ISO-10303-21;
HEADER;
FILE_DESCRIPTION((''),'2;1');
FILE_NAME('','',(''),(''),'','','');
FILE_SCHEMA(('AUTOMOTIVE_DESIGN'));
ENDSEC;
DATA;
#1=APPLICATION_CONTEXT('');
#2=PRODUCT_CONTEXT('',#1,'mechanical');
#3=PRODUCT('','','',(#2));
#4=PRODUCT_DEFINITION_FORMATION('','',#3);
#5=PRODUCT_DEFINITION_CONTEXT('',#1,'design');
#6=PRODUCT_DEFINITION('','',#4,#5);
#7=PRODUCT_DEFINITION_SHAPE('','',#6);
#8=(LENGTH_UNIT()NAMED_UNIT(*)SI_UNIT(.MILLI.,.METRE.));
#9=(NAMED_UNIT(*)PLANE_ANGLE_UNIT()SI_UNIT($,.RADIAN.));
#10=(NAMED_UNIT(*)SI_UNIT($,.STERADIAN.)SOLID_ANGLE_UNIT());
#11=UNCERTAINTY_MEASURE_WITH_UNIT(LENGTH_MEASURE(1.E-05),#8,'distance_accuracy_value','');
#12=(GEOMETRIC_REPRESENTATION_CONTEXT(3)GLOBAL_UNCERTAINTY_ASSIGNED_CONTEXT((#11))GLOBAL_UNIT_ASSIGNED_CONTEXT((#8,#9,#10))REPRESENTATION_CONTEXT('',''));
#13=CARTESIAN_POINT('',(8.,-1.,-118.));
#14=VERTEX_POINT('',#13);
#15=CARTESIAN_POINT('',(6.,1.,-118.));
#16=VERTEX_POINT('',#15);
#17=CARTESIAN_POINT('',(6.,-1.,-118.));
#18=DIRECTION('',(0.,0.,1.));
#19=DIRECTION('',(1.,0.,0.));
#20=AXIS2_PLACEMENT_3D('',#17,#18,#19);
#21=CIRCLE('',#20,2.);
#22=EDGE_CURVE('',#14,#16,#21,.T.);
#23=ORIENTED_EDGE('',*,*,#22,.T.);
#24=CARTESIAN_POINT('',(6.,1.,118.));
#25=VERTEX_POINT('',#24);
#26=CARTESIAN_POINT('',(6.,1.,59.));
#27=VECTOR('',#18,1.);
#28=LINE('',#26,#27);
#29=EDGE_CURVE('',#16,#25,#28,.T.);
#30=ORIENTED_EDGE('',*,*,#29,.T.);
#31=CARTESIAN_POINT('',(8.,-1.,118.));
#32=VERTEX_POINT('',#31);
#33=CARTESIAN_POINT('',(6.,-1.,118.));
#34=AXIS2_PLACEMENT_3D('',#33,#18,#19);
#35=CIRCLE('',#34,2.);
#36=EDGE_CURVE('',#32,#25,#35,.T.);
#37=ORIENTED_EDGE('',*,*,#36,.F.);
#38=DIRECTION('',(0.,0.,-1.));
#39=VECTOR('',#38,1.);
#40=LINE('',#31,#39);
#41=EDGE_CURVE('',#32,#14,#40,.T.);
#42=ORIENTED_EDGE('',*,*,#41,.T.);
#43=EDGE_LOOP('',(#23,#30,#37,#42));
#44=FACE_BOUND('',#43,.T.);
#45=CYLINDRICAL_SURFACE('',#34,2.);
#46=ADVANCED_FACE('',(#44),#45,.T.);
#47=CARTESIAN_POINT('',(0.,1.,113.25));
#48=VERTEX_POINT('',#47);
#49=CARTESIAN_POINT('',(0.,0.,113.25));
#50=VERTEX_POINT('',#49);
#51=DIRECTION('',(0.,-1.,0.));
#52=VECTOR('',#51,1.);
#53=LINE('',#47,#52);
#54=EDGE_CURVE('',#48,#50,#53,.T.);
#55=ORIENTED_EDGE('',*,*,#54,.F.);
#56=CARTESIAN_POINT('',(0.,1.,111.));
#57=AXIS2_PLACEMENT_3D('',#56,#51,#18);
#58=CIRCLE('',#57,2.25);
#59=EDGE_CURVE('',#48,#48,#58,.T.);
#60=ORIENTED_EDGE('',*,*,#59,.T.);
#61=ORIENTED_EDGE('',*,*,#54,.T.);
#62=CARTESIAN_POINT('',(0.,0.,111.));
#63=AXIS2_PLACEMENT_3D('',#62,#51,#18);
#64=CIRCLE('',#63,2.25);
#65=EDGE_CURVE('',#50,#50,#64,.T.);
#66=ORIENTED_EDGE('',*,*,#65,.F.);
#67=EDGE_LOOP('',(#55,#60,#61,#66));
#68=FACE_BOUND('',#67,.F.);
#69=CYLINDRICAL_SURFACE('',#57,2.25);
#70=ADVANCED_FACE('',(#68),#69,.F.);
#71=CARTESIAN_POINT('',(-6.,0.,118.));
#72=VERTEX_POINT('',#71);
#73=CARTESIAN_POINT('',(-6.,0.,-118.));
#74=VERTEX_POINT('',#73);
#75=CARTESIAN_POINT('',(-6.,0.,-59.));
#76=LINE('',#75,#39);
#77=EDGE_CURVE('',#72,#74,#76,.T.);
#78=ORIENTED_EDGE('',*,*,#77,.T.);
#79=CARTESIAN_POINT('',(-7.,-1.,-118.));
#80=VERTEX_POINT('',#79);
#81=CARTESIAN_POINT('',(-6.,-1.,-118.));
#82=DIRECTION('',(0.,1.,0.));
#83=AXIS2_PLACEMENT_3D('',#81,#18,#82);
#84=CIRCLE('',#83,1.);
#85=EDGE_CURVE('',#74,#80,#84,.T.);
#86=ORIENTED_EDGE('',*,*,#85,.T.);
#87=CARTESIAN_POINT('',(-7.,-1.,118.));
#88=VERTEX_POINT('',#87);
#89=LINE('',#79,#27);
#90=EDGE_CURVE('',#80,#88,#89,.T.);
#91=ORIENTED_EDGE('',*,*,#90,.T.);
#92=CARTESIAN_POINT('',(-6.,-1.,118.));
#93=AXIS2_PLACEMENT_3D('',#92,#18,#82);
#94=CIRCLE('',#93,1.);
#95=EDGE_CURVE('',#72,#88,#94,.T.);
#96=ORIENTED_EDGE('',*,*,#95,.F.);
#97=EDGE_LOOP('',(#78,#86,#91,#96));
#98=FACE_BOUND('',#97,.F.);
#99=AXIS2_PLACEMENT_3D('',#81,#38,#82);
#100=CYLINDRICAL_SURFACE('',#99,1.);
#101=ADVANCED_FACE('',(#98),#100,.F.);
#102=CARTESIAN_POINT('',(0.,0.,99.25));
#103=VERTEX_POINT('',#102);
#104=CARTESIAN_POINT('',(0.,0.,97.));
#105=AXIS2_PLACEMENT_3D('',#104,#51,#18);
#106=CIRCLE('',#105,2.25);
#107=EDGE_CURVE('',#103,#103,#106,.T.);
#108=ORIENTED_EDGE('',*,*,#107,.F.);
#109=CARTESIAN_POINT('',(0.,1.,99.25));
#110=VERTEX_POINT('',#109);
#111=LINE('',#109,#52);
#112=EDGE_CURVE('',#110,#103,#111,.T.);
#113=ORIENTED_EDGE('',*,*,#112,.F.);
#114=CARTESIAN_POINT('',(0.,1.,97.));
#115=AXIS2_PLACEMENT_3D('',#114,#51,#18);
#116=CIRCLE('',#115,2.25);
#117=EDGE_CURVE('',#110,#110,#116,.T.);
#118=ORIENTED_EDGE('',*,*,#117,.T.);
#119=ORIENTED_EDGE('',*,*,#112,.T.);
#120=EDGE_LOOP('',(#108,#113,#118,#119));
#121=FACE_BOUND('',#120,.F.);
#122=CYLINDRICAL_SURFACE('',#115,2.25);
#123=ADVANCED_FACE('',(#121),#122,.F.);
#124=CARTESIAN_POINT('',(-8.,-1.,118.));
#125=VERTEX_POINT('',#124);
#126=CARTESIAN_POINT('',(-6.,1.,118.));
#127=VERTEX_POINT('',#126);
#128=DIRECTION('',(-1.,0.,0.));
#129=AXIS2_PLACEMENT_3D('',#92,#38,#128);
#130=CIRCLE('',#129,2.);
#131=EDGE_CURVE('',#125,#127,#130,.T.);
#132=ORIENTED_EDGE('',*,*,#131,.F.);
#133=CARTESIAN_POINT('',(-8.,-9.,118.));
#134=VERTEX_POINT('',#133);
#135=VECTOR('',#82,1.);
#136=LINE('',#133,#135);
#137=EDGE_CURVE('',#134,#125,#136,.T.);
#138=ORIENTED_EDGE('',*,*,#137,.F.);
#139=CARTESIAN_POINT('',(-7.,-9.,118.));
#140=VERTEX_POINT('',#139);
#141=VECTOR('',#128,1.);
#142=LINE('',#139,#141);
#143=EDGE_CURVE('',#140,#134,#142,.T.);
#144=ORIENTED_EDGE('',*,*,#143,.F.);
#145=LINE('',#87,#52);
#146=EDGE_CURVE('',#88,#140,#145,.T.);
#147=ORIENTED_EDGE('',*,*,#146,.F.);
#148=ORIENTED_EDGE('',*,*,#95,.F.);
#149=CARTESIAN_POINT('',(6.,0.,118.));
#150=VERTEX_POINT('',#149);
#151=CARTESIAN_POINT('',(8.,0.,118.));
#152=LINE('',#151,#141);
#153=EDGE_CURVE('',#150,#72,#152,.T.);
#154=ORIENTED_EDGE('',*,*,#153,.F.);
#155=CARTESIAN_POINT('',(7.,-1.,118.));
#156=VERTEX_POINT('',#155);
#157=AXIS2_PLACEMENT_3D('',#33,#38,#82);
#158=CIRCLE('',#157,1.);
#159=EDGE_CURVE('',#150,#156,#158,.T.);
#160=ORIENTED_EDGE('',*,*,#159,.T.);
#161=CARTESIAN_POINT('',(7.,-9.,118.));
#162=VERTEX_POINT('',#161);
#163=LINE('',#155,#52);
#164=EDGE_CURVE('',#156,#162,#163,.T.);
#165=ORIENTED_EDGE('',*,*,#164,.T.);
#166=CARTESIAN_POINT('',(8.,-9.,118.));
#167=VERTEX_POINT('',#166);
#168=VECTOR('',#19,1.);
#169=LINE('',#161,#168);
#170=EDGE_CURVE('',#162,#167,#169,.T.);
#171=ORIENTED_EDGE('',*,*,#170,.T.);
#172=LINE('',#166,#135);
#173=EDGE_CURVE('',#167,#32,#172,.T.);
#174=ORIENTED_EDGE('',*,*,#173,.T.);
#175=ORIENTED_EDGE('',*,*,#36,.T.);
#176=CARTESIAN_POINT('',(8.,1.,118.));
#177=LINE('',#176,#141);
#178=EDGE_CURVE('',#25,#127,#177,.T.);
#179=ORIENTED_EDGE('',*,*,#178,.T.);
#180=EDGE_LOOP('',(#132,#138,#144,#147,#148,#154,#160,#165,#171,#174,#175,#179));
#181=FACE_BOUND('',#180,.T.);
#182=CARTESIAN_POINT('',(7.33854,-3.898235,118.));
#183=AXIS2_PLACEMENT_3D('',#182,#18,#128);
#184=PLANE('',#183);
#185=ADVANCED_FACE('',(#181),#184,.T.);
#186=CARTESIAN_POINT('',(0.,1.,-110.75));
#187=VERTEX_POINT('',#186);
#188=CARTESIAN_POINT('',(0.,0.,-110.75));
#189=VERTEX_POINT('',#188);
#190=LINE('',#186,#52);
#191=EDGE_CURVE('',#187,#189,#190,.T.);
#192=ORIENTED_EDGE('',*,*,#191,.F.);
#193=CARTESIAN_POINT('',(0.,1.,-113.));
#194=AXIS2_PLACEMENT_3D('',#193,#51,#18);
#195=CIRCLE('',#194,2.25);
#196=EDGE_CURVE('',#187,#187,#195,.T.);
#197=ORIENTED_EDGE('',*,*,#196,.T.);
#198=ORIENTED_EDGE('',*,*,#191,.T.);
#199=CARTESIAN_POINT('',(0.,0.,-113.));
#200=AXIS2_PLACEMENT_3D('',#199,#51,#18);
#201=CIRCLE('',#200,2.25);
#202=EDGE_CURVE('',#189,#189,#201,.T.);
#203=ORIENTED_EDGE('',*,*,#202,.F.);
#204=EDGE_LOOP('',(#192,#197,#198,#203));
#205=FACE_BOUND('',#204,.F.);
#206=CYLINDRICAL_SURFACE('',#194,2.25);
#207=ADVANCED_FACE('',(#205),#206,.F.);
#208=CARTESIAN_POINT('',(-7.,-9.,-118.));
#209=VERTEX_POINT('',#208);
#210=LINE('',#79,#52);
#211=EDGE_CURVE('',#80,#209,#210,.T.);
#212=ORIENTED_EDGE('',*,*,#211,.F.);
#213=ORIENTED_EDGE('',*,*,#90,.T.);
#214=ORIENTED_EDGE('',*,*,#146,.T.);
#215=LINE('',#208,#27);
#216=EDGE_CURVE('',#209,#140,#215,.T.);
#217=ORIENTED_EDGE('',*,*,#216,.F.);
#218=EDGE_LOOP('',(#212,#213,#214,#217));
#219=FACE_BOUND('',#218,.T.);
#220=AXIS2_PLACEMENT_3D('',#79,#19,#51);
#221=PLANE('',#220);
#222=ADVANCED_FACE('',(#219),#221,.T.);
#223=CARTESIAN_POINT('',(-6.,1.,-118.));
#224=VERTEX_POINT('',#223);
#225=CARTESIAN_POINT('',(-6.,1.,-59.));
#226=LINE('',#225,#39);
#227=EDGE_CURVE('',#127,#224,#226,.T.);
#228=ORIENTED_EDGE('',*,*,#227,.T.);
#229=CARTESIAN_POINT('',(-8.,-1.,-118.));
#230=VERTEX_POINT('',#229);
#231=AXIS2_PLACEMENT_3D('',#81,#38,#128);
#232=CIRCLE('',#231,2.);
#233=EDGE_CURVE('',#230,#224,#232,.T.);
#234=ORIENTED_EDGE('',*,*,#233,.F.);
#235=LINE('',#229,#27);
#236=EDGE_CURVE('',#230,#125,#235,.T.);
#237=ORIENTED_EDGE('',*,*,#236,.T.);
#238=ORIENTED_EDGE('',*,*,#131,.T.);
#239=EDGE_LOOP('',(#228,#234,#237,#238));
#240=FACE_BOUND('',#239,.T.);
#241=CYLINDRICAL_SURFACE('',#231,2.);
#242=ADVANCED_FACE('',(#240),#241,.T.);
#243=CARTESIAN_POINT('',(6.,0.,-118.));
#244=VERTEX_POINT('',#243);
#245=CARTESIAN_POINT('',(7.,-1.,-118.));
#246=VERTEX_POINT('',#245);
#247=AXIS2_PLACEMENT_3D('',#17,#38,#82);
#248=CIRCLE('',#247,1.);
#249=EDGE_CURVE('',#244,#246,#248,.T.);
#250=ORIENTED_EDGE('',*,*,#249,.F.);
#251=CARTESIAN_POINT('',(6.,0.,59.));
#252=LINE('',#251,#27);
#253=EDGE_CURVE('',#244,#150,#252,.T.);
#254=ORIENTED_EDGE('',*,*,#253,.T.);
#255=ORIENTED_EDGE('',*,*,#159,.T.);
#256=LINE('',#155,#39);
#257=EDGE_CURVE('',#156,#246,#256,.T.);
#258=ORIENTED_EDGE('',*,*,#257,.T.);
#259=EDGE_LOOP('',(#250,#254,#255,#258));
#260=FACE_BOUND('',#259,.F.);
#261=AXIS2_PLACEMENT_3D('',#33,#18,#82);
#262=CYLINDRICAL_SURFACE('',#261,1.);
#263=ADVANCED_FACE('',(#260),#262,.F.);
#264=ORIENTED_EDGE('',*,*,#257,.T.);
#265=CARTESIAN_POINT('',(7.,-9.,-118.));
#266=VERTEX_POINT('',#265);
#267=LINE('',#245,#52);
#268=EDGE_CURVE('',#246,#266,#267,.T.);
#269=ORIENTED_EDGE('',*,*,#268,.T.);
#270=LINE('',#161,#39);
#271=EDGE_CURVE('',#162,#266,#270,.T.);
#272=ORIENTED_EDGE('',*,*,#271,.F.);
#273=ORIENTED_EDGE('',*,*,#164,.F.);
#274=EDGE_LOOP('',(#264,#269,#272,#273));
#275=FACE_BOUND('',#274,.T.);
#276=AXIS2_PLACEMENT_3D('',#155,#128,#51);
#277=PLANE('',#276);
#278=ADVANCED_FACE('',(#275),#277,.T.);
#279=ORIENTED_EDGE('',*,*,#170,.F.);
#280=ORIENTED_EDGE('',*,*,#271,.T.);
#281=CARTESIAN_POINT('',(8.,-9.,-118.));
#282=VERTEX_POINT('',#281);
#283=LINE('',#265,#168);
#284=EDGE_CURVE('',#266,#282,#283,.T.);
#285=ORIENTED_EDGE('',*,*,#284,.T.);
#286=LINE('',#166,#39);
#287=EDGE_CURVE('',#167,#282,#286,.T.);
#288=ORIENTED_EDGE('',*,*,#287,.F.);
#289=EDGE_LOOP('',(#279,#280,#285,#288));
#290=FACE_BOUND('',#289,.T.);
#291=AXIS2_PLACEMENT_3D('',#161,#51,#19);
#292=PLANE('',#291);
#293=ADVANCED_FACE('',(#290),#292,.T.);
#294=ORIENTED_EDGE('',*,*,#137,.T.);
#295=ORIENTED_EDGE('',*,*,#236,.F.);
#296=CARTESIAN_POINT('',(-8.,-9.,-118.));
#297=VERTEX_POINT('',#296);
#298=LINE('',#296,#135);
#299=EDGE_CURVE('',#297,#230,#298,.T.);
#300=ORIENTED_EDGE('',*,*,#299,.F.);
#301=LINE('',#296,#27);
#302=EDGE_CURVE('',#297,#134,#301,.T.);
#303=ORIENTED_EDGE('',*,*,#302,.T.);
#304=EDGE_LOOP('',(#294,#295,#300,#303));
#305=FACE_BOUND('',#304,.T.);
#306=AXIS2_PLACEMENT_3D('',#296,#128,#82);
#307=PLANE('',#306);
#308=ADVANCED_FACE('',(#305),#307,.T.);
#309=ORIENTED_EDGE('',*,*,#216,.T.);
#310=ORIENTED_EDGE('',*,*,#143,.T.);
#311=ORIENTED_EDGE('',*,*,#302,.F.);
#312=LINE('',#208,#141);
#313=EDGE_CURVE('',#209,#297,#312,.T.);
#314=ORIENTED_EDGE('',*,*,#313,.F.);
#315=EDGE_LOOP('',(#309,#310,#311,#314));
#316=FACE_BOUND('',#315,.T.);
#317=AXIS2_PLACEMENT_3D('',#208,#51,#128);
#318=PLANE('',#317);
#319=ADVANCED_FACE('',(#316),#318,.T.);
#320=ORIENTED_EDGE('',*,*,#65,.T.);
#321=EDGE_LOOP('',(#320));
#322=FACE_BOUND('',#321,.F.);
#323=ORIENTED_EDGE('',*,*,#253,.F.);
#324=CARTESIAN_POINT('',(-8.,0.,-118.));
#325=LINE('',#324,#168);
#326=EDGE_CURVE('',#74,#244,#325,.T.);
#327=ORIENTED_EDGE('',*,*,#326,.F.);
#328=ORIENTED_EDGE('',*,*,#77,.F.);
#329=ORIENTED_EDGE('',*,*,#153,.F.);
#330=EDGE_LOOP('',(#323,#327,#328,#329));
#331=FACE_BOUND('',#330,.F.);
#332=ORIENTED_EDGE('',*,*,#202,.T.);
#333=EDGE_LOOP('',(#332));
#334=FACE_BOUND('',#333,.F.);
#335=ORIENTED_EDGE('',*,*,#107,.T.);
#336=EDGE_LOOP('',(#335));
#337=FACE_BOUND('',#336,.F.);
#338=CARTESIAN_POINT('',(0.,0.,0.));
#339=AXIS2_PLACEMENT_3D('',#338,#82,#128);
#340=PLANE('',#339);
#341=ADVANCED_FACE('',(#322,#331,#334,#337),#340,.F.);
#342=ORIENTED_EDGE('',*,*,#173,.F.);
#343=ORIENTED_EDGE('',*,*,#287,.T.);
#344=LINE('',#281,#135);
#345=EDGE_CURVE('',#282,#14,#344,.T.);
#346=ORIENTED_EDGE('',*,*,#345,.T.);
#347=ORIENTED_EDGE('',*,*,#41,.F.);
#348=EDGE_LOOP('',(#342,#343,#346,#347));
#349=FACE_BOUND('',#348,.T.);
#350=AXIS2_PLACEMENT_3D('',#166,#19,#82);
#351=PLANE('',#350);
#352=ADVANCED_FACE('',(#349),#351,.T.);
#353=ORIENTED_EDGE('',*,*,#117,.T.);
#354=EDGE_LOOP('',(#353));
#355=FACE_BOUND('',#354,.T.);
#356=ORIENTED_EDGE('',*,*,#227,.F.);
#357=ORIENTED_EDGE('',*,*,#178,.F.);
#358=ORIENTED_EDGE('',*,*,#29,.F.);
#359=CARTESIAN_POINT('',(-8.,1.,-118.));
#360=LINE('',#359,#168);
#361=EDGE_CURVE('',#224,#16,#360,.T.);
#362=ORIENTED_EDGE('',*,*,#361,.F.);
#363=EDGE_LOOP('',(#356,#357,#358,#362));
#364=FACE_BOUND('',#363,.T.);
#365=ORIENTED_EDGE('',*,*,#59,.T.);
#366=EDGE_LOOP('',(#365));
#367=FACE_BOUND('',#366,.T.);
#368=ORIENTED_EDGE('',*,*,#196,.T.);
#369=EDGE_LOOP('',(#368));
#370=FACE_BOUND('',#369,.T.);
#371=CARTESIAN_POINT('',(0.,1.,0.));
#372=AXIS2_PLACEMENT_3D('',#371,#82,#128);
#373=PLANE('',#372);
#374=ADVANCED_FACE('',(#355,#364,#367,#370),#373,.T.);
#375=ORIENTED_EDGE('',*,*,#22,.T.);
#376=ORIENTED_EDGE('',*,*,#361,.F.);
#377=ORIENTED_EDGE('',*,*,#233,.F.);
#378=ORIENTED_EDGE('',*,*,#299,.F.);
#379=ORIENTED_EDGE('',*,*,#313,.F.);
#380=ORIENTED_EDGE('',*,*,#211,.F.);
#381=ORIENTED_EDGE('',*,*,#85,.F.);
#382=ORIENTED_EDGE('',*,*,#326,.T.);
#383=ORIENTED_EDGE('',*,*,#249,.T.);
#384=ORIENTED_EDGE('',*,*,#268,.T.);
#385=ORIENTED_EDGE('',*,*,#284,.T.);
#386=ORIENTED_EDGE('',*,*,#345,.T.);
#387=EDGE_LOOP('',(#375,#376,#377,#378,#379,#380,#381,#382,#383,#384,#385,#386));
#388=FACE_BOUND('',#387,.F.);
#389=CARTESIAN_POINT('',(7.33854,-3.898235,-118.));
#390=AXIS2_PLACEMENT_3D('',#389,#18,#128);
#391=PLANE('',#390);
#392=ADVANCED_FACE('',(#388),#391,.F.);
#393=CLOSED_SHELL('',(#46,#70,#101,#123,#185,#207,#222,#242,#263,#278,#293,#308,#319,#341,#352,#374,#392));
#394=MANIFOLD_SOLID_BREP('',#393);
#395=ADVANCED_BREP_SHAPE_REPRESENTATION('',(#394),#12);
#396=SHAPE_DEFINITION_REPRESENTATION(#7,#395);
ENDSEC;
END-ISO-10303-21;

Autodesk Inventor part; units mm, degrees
ref_plane "YZ Plane" through (0, 0, 0) normal (1, 0, 0) x (0, 1, 0)
ref_plane "XZ Plane" through (0, 0, 0) normal (0, 1, 0) x (-1, 0, 0)
ref_plane "XY Plane" through (0, 0, 0) normal (0, 0, 1) x (1, 0, 0)
sketch "Esquisse4" plane through (0, 0, 0) normal (0, 1, 0) x (-1, 0, 0)
  line L0 (-8, 118) -> (8, 118)
  line L1 (8, 118) -> (8, -118)
  line L2 (8, -118) -> (-8, -118)
  line L3 (-8, -118) -> (-8, 118)
  line L4 (-8, 118) -> (8, -118) construction
  line L5 (8, 118) -> (-8, -118) construction
  point P0 (0, 0)
  dimension "d26" = 16
  dimension "d27" = 236
extrude "Plaque3" add sketch "Esquisse4" along normal blind 1
sketch "Esquisse5" plane through (7, 1, 118) normal (1, 0, 0) x (0, 1, 0)
  line L0 (0, -236) -> (0, 0)
  line L1 (0, 0) -> (-10, 0)
  line L2 (-10, 0) -> (-10, -236)
  line L3 (-10, -236) -> (0, -236)
edge flange "Bord tombé2" height 10 angle 90 thickness 1 bend radius 1 thickness toward (1, 0, 0) relief tear relief width 1 relief depth 0.5 corner gap 1 corner form 0 edges at (8, 0, 0) (-8, 0, 0) wall of the first edge with corners at (7, 1, -118) (7, 1, 118) (7, -9, 118) (7, -9, -118)
bend "Pli2"
corner "Coin2"
sketch "Esquisse6" plane through (0, 1, 0) normal (0, 1, 0) x (1, 0, 0)
  line L0 (-6, 118) -> (6, 118) projected
  point P0 (0, 0)
  point P1 (0, 113)
  point P2 (0, 118)
  dimension "d39" = 5
hole "Perçage2" at (0, 1, -113) direction (0, -1, 0) diameter 4.5 depth 1 clearance for "Vis d'assemblage à six pans creux ISO 4762" size "M4" standard "ISO"
sketch "Esquisse7" plane through (0, 1, 0) normal (0, 1, 0) x (1, 0, 0)
  line L0 (-6, 118) -> (6, 118) projected
  point P0 (0, 0)
  point P1 (0, -97)
  point P2 (0, -111)
  dimension "d50" = 215
  dimension "d51" = 14
hole "Perçage3" at (0, 1, 97) at (0, 1, 111) direction (0, -1, 0) diameter 4.5 depth 1 clearance for "Vis d'assemblage à six pans creux ISO 4762" size "M4" standard "ISO"
equation "\"d45\" = Epaisseur"
equation "\"d57\" = Epaisseur"
equation "\"d28\" = Epaisseur"
equation "\"d29\" = LargeurGrugeage"
equation "\"d30\" = ProfondeurGrugeage"
equation "\"d31\" = RestesMinimum"
equation "\"d32\" = Rayondetransition"
equation "\"d35\" = RayonPli"
equation "\"d36\" = TailleGrugeage"
equation "\"d37\" = TailleJeu"
equation "\"d38\" = TailleRayonJacobi"
equation "\"RayonPli\" = Epaisseur"
equation "\"LargeurGrugeage\" = Epaisseur"
equation "\"ProfondeurGrugeage\" = 0.5 * Epaisseur"
equation "\"TailleGrugeage\" = 4 * Epaisseur"
equation "\"RestesMinimum\" = 2 * Epaisseur"
equation "\"Rayondetransition\" = RayonPli"
equation "\"TailleRayonJacobi\" = RayonPli"
equation "\"TailleJeu\" = Epaisseur"
equation "\"Epaisseur\" = 1"
properties part number "support_principal"
